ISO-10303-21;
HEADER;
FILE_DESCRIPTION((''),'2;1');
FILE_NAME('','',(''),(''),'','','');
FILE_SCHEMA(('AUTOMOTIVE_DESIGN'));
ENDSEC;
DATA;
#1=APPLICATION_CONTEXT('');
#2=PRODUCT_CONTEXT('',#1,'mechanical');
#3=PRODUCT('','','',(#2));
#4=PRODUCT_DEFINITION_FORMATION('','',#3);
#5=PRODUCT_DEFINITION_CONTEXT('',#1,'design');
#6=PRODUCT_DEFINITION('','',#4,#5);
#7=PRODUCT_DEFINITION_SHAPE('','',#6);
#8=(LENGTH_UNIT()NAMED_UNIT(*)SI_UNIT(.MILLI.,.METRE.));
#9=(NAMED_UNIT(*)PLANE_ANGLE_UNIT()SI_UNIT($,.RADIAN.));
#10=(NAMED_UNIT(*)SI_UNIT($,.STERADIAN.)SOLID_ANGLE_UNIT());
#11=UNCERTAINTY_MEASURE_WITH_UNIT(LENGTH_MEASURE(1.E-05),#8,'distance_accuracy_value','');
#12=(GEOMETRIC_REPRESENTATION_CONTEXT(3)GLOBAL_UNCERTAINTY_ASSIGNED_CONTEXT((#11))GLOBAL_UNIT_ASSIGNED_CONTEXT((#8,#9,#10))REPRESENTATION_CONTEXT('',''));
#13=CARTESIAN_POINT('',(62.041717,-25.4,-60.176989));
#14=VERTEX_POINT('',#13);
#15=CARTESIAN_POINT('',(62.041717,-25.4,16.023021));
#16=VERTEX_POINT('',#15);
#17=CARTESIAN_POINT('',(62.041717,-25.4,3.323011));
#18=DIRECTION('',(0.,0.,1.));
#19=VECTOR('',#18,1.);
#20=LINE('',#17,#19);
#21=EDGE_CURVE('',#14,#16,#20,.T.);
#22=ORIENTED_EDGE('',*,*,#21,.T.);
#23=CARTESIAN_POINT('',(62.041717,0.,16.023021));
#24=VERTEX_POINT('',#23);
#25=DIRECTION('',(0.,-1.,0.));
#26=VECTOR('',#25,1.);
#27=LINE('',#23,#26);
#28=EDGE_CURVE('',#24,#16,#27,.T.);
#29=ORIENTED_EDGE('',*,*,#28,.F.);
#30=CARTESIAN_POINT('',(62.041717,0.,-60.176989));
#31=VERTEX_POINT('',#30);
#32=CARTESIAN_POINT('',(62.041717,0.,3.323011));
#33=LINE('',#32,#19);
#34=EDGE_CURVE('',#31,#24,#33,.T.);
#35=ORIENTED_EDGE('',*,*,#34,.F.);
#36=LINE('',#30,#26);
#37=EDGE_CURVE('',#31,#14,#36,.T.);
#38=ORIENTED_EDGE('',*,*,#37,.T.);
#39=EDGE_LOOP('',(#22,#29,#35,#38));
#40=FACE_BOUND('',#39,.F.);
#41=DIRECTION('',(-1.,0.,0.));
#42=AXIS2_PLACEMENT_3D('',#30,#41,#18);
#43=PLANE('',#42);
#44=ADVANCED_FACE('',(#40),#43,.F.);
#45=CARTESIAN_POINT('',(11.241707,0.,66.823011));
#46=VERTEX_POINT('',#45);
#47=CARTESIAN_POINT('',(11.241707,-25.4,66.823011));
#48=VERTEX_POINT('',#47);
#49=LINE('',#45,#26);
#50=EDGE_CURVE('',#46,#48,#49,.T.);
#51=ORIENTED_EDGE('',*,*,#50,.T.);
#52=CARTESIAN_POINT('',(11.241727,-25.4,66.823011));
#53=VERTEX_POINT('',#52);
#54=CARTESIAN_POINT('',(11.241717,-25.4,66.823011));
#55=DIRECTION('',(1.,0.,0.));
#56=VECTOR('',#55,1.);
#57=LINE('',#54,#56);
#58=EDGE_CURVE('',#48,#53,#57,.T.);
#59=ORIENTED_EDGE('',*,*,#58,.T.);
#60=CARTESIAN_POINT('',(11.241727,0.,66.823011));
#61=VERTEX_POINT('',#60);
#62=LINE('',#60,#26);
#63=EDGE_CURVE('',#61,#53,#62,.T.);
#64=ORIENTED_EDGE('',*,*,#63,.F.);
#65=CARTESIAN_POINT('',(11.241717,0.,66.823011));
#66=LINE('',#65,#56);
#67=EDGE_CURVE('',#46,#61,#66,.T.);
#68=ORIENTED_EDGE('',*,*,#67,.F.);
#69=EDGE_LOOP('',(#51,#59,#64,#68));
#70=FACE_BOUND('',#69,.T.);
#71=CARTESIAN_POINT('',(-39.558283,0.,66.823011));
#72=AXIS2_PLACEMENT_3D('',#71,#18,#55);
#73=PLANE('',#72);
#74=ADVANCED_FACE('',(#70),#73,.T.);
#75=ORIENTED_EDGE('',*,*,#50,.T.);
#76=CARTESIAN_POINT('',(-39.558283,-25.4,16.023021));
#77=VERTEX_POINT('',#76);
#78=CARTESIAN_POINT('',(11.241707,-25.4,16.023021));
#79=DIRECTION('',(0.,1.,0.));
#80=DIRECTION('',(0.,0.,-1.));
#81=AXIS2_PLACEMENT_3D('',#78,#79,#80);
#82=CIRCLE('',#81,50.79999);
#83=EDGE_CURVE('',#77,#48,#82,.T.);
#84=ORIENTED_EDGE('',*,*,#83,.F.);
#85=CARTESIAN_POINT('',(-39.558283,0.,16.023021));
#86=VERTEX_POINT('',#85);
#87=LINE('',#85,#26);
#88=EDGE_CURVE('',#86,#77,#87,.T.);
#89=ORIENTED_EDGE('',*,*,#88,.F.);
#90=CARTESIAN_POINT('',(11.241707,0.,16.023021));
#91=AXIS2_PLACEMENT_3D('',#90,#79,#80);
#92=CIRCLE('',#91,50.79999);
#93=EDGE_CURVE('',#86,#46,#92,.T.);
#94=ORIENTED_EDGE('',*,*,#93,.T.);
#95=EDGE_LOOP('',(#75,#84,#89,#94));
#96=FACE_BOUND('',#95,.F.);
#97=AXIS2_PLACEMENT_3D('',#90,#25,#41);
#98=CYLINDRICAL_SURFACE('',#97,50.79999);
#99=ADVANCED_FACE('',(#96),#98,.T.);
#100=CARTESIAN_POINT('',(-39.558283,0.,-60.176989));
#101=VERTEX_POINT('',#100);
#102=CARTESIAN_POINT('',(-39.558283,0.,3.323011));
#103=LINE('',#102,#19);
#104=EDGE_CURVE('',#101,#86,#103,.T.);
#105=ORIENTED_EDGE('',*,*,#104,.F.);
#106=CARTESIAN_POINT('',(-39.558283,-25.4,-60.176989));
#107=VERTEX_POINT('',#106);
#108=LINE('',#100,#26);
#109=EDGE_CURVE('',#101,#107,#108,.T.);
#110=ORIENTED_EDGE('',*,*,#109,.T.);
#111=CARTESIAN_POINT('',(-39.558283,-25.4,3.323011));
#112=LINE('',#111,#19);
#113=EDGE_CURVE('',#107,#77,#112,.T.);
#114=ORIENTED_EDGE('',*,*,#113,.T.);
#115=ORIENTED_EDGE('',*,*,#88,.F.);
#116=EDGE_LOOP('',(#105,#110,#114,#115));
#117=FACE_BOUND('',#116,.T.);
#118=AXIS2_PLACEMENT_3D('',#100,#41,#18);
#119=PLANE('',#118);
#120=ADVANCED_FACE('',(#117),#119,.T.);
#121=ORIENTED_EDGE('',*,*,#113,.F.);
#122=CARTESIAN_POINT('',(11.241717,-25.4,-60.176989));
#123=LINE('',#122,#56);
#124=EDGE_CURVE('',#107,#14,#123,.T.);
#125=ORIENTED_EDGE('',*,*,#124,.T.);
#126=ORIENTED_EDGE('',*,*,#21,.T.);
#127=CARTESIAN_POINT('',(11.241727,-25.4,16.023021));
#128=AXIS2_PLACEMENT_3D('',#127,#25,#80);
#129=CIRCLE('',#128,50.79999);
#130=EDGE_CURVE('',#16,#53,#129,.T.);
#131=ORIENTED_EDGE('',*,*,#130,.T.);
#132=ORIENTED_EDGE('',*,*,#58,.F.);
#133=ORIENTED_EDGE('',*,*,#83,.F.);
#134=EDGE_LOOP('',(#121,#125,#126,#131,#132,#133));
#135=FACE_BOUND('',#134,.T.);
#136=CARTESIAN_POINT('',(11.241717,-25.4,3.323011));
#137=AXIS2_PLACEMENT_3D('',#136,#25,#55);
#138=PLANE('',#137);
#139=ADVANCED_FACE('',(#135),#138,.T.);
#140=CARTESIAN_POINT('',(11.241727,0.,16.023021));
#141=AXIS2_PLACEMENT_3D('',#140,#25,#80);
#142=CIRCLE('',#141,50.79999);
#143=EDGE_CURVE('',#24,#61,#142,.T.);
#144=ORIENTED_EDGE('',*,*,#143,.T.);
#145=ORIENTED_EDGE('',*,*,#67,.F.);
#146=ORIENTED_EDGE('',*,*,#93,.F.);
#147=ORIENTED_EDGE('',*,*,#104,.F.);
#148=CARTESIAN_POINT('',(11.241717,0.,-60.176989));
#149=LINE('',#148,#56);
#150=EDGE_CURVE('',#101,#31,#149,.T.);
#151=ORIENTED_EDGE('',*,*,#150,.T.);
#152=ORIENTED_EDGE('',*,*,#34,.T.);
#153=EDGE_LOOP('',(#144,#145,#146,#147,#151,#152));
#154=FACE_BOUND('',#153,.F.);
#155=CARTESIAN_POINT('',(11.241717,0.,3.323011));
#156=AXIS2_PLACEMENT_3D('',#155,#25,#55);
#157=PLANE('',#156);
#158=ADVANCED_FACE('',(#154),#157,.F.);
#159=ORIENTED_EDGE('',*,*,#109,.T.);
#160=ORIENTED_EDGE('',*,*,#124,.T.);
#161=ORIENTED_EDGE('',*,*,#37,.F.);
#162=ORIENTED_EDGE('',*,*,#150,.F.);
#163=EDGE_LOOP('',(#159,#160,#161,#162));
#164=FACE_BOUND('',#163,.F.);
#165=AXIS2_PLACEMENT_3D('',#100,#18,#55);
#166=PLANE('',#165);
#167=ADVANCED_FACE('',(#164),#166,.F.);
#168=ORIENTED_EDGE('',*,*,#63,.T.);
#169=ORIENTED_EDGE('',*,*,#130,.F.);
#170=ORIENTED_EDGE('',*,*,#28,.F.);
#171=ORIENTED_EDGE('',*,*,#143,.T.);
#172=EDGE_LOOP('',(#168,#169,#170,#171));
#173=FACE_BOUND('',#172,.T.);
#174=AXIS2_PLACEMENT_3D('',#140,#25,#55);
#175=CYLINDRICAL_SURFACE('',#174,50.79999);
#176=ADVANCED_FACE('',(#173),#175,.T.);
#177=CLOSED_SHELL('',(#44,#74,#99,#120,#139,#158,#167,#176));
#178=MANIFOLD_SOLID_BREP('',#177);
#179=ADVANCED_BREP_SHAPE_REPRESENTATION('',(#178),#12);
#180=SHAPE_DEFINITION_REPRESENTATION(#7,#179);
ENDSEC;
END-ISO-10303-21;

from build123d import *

# Parameters (mm, degrees)
F0_W     = 101.6
F0_H     = 127
F1_DEPTH = 25.4
F2_R     = 50.79999


# Not quite as in the source:
# - a fillet or chamfer is up to 0.001 mm smaller than in the source, because OpenCascade refuses the exact size


with BuildPart() as f1:
    # F0 (on Front) → F1 (new body)
    with BuildSketch(Plane.XZ):
        with Locations((11.2417165004, 3.3230111003)):
            Rectangle(F0_W, F0_H)
    extrude(amount=F1_DEPTH)

    # F2 (radius 50.8 in the source; OpenCascade refuses exactly that, so slightly less here)
    f2_edges = [f1.edges().sort_by_distance(p)[0] for p in [
        (62.041717, -12.7, 66.823011),
        (-39.558283, -12.7, 66.823011),
    ]]
    fillet(f2_edges, radius=F2_R)


solid = f1.part
